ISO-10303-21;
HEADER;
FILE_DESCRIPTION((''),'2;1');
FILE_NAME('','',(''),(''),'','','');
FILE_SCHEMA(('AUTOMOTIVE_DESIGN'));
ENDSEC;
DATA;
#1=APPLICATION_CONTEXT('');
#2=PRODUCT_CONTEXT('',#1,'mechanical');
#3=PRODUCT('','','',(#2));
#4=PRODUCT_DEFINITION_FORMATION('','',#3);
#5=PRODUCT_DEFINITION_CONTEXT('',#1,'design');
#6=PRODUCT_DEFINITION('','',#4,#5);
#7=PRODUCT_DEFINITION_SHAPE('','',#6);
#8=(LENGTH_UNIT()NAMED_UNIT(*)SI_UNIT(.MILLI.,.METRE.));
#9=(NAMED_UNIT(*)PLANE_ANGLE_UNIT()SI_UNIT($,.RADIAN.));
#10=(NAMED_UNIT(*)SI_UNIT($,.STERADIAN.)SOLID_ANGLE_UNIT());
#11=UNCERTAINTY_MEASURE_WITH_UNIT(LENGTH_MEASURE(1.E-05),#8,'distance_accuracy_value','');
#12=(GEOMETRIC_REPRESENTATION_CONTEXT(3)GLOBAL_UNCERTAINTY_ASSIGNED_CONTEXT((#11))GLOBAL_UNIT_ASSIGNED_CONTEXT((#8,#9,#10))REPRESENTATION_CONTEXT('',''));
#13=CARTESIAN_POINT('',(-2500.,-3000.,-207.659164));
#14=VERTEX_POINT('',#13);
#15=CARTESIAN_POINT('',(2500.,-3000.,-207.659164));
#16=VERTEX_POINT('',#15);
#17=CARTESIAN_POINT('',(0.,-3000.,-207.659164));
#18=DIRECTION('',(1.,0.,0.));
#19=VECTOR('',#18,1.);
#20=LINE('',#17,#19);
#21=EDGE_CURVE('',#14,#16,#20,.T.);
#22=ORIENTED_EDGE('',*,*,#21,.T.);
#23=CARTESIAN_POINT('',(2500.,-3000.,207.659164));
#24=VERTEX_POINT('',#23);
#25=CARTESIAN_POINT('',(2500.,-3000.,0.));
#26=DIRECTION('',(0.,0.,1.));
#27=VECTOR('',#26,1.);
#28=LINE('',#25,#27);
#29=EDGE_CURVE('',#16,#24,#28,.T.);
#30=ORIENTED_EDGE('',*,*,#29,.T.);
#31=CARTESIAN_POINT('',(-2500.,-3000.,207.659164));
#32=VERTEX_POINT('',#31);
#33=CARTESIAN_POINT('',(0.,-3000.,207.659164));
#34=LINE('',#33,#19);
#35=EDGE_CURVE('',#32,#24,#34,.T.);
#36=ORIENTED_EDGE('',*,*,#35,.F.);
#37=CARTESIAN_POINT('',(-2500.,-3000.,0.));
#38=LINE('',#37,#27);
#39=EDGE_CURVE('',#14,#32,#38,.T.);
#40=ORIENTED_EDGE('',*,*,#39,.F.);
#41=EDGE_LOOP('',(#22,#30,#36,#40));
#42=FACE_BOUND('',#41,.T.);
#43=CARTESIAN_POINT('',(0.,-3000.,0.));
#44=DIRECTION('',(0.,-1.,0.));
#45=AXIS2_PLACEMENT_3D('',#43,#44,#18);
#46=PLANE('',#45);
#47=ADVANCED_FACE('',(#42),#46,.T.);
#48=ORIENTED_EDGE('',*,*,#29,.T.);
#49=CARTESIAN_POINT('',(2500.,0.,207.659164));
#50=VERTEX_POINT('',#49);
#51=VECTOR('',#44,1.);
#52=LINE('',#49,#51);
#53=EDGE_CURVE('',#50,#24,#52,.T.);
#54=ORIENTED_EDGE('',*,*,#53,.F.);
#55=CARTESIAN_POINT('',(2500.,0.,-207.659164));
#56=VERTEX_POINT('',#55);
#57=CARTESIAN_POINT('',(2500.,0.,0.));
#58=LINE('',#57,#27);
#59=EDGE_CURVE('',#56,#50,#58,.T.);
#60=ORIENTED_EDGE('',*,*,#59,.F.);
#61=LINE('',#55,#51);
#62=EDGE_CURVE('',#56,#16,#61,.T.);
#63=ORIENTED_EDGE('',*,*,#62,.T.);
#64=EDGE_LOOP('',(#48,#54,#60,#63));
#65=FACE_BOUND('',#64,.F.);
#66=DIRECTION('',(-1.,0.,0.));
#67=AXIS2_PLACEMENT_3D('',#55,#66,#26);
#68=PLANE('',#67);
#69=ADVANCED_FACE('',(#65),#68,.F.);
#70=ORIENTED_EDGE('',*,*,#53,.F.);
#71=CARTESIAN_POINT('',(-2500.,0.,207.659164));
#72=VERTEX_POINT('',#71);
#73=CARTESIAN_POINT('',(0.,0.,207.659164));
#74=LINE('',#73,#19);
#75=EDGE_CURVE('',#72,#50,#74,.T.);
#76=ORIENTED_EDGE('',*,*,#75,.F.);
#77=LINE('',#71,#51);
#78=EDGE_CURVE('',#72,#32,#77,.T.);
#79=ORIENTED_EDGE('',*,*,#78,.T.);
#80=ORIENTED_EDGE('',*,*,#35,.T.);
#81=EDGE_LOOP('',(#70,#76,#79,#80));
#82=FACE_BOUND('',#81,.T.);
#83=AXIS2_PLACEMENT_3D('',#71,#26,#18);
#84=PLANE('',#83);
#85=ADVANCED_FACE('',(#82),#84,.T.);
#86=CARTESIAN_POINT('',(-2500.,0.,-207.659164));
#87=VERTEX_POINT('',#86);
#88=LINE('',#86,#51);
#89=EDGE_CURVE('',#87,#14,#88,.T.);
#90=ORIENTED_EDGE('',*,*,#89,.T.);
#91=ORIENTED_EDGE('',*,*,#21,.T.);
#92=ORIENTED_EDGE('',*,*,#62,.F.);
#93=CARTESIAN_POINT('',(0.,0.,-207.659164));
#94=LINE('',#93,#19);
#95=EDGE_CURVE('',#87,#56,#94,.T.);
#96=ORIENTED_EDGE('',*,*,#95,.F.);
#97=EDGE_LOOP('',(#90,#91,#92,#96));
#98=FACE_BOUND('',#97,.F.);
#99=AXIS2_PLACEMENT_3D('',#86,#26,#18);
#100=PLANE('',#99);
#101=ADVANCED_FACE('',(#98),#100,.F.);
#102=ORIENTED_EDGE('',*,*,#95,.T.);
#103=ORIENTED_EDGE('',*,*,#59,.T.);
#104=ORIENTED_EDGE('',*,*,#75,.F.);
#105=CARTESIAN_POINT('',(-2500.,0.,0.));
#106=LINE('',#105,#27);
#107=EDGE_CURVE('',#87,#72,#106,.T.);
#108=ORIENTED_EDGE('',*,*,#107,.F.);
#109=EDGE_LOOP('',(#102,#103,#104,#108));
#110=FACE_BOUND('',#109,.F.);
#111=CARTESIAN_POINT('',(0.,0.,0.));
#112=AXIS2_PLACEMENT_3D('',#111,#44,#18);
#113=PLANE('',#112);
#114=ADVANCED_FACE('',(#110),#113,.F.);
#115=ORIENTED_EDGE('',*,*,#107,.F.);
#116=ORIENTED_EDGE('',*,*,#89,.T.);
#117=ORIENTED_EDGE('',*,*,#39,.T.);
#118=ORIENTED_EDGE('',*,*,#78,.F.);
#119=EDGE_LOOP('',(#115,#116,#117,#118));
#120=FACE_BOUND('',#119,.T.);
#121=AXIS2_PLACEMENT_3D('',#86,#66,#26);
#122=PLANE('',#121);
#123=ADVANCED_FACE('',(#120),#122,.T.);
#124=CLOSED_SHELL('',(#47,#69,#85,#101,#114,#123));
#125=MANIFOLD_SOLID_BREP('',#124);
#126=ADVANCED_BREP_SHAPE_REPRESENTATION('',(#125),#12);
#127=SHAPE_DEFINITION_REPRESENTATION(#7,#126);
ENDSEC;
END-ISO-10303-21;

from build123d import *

# Parameters (mm, degrees)
F0_W     = 5000
F0_H     = 415.31832783
F1_DEPTH = 3000


# Not quite as in the source:
# - the program builds the solid bodies; features that only make, move or delete a surface that nothing else refers to are left out


with BuildPart() as f1:
    # F0 (on Front) → F1 (new body)
    with BuildSketch(Plane.XZ):
        Rectangle(F0_W, F0_H)
    extrude(amount=F1_DEPTH)


solid = f1.part
